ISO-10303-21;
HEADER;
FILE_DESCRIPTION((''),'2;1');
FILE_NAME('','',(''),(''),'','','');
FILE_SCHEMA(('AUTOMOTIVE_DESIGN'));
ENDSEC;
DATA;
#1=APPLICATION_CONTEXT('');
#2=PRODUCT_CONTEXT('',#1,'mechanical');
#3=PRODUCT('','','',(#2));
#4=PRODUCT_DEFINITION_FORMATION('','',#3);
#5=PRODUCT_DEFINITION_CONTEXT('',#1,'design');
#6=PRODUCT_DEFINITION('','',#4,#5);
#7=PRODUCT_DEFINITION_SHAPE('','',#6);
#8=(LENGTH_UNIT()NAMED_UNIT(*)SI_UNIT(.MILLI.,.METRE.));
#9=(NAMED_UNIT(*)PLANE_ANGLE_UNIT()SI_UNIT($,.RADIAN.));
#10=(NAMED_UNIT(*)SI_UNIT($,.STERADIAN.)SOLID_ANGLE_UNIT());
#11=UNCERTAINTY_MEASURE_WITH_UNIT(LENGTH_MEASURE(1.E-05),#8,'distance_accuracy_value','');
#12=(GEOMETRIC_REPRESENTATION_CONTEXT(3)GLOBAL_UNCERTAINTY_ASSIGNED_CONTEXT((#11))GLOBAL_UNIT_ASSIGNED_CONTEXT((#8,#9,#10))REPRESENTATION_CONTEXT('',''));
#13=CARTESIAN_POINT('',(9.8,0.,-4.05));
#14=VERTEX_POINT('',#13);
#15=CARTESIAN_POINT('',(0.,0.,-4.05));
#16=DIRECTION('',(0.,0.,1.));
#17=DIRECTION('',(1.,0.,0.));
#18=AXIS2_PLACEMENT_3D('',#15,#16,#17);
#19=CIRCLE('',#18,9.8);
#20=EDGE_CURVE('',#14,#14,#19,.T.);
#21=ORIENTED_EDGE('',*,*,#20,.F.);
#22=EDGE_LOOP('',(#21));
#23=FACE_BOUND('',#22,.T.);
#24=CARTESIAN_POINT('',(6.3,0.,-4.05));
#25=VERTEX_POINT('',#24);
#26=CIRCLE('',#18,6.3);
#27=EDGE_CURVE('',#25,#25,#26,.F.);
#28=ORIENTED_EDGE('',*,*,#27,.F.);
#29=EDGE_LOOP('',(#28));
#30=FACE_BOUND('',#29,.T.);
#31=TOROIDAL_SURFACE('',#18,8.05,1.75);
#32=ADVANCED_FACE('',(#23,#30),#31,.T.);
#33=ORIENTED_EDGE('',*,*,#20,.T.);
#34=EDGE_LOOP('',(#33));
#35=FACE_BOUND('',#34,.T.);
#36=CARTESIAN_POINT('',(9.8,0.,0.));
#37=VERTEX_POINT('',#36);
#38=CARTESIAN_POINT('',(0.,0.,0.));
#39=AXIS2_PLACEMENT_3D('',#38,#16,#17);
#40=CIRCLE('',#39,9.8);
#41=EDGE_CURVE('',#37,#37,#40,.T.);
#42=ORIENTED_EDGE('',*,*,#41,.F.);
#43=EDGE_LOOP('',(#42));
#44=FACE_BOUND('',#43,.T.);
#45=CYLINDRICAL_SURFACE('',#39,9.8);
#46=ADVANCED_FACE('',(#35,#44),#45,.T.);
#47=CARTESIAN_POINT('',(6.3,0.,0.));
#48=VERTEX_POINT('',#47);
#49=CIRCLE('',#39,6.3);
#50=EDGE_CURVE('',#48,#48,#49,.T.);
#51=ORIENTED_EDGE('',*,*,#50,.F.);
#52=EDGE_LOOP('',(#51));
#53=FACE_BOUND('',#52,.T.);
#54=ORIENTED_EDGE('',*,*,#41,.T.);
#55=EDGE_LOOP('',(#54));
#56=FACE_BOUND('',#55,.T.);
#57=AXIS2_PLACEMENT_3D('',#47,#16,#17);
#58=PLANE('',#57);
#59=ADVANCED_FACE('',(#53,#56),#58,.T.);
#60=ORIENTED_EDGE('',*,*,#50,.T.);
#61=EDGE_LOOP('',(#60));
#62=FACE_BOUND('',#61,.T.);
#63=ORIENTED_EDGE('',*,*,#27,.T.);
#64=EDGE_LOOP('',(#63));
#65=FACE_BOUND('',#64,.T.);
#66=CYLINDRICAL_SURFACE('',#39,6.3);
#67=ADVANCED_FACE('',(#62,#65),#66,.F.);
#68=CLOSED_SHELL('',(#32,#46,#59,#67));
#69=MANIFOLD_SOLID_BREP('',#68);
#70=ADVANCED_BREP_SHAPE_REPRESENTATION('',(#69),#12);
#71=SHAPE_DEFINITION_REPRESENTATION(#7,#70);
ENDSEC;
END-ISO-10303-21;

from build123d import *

# Parameters (mm, degrees)
CROQUIS1_W  = 3.5
CROQUIS1_H  = 5.8
REDONDEO1_R = 1.75


with BuildPart() as part:
    # Croquis1 → Revolución1 (revolve)
    with BuildSketch(Plane(origin=(0, 0, 0), x_dir=(1, 0, 0), z_dir=(0, 1, 0))):
        with Locations((8.05, 2.9)):
            Rectangle(CROQUIS1_W, CROQUIS1_H)
    revolve(axis=Axis((0, 0, 0), (0, 0, -1)))

    # Redondeo1
    redondeo1_edges = [part.edges().sort_by_distance(p)[0] for p in [
        (-9.8, 0, -5.8),
        (-6.3, 0, -5.8),
    ]]
    fillet(redondeo1_edges, radius=REDONDEO1_R - 0.0001)  # a hair under: the kernel refuses the full size


solid = part.part
